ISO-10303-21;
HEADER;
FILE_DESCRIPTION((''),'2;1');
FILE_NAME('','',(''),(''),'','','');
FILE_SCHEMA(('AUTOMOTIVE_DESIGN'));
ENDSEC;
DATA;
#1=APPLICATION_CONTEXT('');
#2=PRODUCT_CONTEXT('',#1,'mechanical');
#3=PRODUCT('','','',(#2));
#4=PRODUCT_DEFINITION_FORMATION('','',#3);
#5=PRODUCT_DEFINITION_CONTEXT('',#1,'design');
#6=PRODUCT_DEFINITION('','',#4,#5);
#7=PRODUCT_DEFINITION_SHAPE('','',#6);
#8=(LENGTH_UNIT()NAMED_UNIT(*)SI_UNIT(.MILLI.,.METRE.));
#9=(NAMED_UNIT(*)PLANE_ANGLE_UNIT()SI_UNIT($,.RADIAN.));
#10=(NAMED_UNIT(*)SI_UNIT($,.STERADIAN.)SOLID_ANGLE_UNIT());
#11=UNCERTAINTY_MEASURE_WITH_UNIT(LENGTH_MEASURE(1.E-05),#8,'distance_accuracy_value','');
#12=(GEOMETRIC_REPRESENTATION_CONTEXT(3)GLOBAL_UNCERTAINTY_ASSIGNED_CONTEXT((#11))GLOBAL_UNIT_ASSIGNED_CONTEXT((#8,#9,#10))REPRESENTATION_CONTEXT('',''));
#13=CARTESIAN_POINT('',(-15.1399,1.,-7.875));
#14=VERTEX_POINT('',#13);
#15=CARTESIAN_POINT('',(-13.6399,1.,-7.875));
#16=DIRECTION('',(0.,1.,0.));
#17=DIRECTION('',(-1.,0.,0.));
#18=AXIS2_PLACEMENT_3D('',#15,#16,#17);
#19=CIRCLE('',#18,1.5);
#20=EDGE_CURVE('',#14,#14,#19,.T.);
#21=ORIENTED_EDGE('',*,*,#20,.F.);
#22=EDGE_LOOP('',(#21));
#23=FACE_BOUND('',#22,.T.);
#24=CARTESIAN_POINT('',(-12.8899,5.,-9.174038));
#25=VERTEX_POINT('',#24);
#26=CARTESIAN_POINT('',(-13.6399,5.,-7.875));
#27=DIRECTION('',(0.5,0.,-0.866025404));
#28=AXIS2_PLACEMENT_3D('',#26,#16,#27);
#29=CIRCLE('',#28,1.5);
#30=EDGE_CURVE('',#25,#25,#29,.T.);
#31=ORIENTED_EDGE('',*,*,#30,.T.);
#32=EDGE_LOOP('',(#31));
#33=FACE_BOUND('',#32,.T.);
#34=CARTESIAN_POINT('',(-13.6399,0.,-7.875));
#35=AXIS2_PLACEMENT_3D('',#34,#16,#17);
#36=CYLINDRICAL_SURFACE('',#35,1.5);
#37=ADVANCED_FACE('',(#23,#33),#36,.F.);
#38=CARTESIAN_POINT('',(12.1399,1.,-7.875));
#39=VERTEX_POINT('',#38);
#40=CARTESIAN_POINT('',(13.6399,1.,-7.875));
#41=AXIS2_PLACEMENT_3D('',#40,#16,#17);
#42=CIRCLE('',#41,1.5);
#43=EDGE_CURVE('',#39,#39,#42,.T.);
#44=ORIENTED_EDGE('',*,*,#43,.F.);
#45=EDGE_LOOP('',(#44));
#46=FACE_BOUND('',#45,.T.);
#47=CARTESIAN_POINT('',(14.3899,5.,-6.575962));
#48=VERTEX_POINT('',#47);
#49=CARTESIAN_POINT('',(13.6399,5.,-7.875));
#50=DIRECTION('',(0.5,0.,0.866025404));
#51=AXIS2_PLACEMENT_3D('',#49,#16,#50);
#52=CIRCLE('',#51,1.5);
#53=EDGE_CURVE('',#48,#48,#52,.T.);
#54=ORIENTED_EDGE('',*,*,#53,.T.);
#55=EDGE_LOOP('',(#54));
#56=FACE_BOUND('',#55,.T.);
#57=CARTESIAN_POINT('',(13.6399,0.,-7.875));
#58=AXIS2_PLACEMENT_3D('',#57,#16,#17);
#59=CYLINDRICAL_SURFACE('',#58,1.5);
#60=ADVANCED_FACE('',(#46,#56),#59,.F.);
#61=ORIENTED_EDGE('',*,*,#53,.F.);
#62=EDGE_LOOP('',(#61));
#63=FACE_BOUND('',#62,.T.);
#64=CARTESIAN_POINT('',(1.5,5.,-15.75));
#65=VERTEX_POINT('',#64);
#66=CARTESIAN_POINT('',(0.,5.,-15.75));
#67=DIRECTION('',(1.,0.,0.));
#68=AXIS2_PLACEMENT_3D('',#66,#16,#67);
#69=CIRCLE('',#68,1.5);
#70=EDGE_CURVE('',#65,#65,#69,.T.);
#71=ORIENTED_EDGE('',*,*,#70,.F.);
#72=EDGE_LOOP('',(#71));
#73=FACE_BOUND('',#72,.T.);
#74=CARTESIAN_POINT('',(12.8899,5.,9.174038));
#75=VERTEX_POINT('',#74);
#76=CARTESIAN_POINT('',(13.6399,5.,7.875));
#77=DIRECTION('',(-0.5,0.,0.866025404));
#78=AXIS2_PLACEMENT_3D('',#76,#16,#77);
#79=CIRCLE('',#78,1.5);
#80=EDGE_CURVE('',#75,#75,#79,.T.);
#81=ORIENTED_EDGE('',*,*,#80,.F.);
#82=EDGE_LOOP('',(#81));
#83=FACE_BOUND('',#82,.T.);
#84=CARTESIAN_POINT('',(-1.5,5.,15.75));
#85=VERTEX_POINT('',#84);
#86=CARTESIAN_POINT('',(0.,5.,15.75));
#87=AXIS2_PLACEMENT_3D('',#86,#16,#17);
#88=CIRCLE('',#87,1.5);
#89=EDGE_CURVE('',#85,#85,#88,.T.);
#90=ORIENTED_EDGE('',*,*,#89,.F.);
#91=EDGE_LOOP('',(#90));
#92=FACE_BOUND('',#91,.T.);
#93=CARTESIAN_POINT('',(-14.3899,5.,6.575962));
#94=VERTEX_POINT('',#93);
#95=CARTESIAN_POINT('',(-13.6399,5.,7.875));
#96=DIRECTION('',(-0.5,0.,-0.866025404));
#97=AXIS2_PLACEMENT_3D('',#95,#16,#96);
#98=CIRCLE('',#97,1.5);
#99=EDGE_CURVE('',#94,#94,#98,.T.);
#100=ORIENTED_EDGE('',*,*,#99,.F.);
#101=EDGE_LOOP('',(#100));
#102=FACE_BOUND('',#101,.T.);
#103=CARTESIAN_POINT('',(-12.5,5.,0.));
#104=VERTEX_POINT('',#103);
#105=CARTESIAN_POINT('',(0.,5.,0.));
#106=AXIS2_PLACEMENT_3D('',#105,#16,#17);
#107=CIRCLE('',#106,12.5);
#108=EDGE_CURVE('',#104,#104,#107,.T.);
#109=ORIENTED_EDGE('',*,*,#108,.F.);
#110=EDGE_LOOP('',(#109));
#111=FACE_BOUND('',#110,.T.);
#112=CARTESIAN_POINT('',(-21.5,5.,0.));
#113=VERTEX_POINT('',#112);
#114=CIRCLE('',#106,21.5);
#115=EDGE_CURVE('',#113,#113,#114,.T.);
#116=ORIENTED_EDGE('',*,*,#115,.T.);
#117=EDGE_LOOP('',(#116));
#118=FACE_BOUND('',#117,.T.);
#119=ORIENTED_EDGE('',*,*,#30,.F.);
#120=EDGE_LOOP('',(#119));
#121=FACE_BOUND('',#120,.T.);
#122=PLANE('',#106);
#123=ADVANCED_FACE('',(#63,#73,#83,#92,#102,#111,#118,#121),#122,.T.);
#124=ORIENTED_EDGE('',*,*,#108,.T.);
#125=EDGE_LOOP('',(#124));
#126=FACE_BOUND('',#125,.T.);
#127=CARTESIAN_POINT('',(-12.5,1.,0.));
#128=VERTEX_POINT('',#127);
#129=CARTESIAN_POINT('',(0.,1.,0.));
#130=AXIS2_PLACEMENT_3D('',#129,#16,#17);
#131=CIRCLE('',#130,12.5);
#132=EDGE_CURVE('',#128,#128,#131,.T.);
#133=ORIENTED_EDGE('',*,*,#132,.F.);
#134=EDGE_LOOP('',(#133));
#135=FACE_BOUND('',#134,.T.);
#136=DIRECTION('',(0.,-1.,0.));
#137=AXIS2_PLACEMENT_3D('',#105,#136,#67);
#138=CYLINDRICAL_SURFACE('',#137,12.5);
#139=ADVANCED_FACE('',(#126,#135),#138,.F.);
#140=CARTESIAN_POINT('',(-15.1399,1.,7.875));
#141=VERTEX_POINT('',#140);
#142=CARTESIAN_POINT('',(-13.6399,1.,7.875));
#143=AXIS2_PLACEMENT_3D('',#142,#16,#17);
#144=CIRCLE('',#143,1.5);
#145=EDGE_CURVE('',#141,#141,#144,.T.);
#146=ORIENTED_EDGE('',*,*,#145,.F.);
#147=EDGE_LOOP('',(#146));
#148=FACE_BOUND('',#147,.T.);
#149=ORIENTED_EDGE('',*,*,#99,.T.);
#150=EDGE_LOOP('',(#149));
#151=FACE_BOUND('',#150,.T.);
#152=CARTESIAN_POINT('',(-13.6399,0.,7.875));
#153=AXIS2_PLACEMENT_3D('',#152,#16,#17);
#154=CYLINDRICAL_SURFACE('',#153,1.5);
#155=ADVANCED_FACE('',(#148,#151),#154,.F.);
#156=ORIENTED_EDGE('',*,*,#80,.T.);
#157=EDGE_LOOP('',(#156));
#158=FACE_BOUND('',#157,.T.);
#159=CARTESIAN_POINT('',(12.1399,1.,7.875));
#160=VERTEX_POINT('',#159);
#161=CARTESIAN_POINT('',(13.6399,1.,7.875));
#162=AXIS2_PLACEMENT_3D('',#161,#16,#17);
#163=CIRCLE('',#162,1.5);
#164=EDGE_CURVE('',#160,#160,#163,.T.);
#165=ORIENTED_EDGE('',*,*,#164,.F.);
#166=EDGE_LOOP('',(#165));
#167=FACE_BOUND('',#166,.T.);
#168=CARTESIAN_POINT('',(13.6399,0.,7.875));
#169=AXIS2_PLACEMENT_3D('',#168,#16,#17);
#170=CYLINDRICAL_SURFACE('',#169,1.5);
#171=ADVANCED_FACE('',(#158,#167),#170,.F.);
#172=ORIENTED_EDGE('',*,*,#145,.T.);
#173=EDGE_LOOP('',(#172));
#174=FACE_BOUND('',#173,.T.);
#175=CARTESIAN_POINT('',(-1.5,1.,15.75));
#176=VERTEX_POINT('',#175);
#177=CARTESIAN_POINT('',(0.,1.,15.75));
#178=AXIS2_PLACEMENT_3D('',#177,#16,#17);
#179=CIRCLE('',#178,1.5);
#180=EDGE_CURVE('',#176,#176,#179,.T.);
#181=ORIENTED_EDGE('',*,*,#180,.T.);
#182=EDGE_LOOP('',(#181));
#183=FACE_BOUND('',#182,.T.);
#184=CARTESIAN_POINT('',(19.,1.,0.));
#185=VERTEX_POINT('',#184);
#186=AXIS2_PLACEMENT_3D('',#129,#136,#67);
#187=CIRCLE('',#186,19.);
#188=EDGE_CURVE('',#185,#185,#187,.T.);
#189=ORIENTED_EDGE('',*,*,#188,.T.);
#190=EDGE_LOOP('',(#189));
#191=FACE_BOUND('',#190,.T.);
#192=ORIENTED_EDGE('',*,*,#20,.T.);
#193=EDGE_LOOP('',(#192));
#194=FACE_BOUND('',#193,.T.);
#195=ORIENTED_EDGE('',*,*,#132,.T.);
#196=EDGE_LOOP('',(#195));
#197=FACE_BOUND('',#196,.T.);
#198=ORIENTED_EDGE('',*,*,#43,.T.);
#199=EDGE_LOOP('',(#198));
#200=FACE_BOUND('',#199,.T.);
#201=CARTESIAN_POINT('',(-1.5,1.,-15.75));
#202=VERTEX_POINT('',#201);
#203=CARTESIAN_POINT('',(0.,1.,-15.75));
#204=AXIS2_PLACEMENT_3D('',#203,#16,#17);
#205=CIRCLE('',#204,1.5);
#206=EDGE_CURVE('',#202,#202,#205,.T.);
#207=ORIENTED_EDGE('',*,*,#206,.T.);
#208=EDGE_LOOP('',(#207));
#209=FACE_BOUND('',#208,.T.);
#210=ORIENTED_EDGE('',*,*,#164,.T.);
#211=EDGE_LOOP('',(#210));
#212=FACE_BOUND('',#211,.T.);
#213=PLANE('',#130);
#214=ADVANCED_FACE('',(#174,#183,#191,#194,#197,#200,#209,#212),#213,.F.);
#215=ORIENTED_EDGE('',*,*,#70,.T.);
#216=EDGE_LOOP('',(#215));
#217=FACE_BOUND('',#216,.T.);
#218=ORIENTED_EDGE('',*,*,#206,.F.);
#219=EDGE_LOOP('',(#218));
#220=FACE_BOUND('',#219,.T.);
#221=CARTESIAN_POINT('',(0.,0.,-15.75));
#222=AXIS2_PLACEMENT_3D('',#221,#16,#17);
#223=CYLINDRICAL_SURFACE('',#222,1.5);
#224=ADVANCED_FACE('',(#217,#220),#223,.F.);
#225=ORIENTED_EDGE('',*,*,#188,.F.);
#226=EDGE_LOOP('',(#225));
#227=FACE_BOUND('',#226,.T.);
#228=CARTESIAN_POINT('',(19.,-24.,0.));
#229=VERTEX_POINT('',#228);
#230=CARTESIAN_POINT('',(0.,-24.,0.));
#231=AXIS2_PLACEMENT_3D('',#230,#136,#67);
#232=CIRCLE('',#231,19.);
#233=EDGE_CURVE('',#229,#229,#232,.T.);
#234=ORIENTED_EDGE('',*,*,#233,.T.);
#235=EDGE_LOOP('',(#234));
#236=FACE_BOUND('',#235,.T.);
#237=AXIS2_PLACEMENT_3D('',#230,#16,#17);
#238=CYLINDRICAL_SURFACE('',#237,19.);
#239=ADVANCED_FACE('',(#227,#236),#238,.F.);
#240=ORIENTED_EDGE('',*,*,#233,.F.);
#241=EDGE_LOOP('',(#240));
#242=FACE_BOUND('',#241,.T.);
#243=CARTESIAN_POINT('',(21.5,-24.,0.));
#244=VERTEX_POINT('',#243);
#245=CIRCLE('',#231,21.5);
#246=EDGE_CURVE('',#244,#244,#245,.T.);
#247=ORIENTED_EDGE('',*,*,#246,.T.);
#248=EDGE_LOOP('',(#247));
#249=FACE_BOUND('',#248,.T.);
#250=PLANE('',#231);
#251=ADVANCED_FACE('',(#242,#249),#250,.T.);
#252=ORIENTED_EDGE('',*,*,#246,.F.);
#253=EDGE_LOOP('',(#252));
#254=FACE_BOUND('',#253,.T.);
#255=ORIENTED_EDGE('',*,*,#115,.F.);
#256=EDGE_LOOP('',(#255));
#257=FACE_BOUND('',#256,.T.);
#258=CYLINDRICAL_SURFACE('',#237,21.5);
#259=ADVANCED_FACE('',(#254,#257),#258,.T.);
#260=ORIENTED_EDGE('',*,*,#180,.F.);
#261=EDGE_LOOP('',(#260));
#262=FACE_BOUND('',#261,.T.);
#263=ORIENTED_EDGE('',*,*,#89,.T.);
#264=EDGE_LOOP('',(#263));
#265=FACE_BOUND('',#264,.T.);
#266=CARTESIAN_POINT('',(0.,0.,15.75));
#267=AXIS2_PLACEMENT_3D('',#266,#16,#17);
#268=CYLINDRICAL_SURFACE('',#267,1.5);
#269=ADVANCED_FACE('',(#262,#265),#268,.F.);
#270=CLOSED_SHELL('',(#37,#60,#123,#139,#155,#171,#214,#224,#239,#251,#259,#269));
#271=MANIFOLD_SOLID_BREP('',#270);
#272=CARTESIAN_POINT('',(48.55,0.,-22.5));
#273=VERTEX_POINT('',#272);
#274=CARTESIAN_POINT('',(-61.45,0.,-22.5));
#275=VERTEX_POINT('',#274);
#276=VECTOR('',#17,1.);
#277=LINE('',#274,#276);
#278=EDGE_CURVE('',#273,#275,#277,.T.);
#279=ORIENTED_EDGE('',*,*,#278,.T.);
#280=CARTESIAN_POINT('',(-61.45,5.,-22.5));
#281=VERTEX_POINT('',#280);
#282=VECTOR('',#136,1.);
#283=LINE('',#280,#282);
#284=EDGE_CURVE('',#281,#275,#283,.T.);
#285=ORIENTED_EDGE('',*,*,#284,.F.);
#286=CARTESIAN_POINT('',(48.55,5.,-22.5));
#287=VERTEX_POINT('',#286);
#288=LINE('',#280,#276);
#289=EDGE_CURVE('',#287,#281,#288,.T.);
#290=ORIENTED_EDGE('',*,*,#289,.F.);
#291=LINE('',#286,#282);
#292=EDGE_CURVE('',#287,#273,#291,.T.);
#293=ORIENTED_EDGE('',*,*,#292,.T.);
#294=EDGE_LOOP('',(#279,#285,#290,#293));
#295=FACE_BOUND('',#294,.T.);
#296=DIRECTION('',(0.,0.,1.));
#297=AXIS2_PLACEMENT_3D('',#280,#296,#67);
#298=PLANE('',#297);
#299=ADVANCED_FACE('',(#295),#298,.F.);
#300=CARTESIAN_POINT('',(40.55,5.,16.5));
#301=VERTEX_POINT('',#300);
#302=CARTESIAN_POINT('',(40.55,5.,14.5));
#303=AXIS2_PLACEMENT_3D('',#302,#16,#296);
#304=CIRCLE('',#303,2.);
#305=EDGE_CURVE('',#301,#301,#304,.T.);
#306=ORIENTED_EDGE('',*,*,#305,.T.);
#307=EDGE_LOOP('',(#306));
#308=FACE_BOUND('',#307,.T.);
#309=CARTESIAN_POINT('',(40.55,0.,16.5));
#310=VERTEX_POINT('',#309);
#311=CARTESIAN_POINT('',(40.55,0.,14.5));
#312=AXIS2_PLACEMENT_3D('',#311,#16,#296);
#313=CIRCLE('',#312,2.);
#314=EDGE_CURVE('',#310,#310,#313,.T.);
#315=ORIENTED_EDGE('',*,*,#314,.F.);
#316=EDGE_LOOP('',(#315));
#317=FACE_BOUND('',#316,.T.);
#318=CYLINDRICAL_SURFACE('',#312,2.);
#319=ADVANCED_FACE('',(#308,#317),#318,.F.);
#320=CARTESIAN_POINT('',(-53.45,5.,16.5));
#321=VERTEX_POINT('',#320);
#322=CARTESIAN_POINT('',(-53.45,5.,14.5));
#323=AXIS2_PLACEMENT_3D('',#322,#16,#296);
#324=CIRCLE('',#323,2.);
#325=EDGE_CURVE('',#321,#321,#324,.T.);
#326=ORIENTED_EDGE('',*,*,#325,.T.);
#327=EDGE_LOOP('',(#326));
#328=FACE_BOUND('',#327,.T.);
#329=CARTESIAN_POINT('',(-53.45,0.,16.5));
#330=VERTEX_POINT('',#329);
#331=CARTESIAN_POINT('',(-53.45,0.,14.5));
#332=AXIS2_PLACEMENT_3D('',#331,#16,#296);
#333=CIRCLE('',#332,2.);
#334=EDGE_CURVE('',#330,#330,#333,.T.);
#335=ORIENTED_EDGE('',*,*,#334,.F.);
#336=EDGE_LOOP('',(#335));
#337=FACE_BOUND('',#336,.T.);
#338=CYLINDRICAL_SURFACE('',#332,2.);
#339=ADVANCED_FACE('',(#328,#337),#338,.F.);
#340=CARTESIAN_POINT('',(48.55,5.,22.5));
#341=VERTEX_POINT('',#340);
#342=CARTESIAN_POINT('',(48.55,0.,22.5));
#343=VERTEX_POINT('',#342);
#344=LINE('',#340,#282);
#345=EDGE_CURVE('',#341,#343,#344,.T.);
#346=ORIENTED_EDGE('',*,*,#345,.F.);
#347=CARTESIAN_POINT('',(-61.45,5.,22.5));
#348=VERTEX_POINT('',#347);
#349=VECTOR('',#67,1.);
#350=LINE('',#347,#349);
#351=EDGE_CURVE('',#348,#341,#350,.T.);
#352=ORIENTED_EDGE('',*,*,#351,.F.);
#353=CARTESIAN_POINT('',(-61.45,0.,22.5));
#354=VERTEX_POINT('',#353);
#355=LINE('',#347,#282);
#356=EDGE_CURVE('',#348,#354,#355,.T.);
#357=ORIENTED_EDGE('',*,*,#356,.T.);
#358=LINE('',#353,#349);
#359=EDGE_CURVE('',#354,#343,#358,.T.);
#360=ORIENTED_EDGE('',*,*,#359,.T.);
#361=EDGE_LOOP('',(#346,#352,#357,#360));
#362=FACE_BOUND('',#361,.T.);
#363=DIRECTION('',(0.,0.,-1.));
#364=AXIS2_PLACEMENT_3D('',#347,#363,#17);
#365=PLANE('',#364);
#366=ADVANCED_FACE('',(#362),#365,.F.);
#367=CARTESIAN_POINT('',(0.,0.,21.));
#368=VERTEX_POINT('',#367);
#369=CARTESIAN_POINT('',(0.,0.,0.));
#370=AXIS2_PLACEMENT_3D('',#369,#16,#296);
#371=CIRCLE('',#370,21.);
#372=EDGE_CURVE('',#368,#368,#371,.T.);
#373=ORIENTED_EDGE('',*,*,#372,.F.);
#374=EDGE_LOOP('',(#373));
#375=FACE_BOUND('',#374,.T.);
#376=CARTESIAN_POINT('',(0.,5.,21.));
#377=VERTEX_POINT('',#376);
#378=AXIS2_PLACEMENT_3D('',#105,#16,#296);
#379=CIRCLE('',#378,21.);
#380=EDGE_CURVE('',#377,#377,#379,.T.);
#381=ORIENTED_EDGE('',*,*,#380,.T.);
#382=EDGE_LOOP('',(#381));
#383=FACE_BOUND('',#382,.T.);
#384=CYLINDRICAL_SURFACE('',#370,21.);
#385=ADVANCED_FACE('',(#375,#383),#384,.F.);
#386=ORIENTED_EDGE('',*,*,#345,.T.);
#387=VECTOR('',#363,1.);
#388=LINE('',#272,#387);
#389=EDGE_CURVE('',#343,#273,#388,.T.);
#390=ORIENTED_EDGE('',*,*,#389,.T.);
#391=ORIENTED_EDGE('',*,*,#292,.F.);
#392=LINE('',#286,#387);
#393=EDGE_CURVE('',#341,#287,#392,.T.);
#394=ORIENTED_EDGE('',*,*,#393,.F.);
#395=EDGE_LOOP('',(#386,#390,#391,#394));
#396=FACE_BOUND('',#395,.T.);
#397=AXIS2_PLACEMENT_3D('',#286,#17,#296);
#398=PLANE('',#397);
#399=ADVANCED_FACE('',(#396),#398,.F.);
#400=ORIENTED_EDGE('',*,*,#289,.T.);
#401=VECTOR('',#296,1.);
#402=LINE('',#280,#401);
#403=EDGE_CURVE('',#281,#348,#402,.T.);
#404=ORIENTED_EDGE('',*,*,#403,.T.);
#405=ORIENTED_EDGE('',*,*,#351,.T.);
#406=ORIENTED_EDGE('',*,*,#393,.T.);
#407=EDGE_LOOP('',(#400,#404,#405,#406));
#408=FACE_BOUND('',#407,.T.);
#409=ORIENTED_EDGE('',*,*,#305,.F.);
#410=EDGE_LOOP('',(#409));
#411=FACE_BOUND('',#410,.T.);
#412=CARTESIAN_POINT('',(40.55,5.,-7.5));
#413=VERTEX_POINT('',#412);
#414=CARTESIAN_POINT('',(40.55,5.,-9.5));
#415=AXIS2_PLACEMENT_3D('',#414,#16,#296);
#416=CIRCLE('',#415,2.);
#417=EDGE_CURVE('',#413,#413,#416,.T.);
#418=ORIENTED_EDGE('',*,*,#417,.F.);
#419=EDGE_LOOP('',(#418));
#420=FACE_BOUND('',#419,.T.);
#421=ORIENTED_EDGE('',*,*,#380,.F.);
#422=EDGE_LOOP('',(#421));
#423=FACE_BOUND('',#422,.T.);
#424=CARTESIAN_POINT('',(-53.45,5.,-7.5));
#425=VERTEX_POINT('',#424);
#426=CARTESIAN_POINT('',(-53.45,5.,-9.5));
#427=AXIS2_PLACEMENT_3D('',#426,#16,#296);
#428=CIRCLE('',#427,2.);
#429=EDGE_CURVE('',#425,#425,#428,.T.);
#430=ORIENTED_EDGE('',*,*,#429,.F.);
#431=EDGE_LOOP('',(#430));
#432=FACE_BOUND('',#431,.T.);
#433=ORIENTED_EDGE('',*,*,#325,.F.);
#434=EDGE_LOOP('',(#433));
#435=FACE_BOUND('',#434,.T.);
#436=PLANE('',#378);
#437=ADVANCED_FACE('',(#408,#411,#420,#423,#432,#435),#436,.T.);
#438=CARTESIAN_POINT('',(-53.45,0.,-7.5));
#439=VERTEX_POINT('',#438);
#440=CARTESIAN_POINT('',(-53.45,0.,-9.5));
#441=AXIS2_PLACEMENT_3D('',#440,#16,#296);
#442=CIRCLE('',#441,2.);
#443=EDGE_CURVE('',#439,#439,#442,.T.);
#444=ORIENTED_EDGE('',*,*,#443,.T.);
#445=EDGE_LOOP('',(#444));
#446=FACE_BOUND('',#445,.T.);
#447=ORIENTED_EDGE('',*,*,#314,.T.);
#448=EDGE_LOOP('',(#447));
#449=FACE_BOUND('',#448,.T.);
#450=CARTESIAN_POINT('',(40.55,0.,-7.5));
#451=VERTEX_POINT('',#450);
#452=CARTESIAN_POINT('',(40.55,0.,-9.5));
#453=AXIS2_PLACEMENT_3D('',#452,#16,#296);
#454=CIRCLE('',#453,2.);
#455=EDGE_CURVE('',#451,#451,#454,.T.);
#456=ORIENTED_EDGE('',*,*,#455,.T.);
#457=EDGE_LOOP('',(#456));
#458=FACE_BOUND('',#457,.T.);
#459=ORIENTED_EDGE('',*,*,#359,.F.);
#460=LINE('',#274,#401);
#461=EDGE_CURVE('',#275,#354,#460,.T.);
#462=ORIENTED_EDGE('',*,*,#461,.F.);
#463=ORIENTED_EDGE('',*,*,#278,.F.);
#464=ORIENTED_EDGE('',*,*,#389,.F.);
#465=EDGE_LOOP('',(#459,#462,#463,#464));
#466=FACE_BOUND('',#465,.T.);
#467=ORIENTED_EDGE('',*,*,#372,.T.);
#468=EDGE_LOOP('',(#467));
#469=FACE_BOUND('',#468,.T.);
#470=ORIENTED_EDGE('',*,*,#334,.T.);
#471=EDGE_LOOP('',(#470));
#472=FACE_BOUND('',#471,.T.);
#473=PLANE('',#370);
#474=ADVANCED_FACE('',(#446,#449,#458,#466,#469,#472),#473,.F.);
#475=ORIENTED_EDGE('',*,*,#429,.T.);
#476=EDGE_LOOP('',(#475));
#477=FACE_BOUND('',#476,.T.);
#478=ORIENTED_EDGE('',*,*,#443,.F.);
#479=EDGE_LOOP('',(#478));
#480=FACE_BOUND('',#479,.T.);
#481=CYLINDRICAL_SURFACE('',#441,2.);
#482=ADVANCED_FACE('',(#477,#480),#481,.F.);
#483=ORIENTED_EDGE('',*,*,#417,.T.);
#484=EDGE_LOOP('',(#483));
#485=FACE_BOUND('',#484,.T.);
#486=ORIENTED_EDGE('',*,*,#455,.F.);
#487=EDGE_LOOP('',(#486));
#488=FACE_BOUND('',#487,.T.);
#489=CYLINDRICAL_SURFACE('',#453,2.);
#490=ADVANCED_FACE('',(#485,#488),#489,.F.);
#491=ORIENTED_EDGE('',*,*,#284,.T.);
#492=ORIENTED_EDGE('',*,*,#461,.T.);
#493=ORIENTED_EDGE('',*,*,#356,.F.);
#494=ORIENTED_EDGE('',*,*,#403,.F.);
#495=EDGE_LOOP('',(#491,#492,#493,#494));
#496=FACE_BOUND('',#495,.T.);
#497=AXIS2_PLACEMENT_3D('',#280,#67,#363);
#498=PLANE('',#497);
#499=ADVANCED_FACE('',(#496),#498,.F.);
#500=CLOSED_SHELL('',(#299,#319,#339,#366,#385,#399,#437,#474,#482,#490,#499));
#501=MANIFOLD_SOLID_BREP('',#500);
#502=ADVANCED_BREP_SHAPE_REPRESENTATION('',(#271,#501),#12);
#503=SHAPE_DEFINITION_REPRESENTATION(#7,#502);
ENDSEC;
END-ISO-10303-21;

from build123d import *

# Parameters (mm, degrees)
SKETCH1_W                 = 110
SKETCH1_H                 = 45
BOSS_EXTRUDE1_DEPTH       = 5
SKETCH2_R                 = 21
CUT_EXTRUDE1_DEPTH        = 5
MOTOR_MOUNT_START         = -24
MOTOR_MOUNT_OUTLINE_R     = 21.5
MOTOR_MOUNT_OUTLINE_R_2   = 19
MOTOR_MOUNT_DEPTH         = 29
MOTOR_MOUNT_START_2       = 1
MOTOR_MOUNT_2_OUTLINE_R   = 19
MOTOR_MOUNT_2_OUTLINE_R_2 = 1.5
MOTOR_MOUNT_2_OUTLINE_R_3 = 12.5
MOTOR_MOUNT_2_DEPTH       = 4
SKETCH6_R                 = 2
CUT_EXTRUDE2_DEPTH        = 5
SKETCH7_R                 = 2
CUT_EXTRUDE3_DEPTH        = 5


# Read off the part's stored shape, not the designer's step: motor_mount
with BuildPart() as part:
    # Sketch1 → Boss-Extrude1 (new body)
    with BuildSketch(Plane(origin=(0, 0, 0), x_dir=(1, 0, 0), z_dir=(0, 1, 0))):
        with Locations((-6.45, 0)):
            Rectangle(SKETCH1_W, SKETCH1_H)
    extrude(amount=BOSS_EXTRUDE1_DEPTH)

    # Sketch2 → Cut-Extrude1 (cut)
    with BuildSketch(Plane(origin=(0, 5, 0), x_dir=(1, 0, 0), z_dir=(0, 1, 0))):
        with Locations(Location((0, 0, 0), (0, 0, 270))):
            Circle(SKETCH2_R)
    extrude(amount=-CUT_EXTRUDE1_DEPTH, mode=Mode.SUBTRACT)

    # Sketch6 → Cut-Extrude2 (cut)
    with BuildSketch(Plane(origin=(0, 5, 0), x_dir=(1, 0, 0), z_dir=(0, 1, 0))):
        with Locations(Location((40.55, -14.5, 0), (0, 0, 270))):
            Circle(SKETCH6_R)
        with Locations(Location((40.55, 9.5, 0), (0, 0, 270))):
            Circle(SKETCH6_R)
    extrude(amount=-CUT_EXTRUDE2_DEPTH, mode=Mode.SUBTRACT)

    # Sketch7 → Cut-Extrude3 (cut)
    with BuildSketch(Plane(origin=(0, 5, 0), x_dir=(1, 0, 0), z_dir=(0, 1, 0))):
        with Locations(Location((-53.45, -14.5, 0), (0, 0, 270))):
            Circle(SKETCH7_R)
        with Locations(Location((-53.45, 9.5, 0), (0, 0, 270))):
            Circle(SKETCH7_R)
    extrude(amount=-CUT_EXTRUDE3_DEPTH, mode=Mode.SUBTRACT)


with BuildPart() as body_2:
    # motor_mount outline → motor_mount (new body)
    with BuildSketch(Plane(origin=(0, 0, 0), x_dir=(1, 0, 0), z_dir=(0, 1, 0)).offset(MOTOR_MOUNT_START)):
        Circle(MOTOR_MOUNT_OUTLINE_R)
        Circle(MOTOR_MOUNT_OUTLINE_R_2, mode=Mode.SUBTRACT)
    extrude(amount=MOTOR_MOUNT_DEPTH)

    # motor_mount 2 outline → motor_mount 2 (add)
    with BuildSketch(Plane(origin=(0, 0, 0), x_dir=(1, 0, 0), z_dir=(0, 1, 0)).offset(MOTOR_MOUNT_START_2)):
        Circle(MOTOR_MOUNT_2_OUTLINE_R)
        with Locations((-13.63990011, -7.875)):
            Circle(MOTOR_MOUNT_2_OUTLINE_R_2, mode=Mode.SUBTRACT)
        with Locations((0, -15.75)):
            Circle(MOTOR_MOUNT_2_OUTLINE_R_2, mode=Mode.SUBTRACT)
        with Locations((13.63990011, -7.875)):
            Circle(MOTOR_MOUNT_2_OUTLINE_R_2, mode=Mode.SUBTRACT)
        with Locations((-13.63990011, 7.875)):
            Circle(MOTOR_MOUNT_2_OUTLINE_R_2, mode=Mode.SUBTRACT)
        Circle(MOTOR_MOUNT_2_OUTLINE_R_3, mode=Mode.SUBTRACT)
        with Locations((13.63990011, 7.875)):
            Circle(MOTOR_MOUNT_2_OUTLINE_R_2, mode=Mode.SUBTRACT)
        with Locations((0, 15.75)):
            Circle(MOTOR_MOUNT_2_OUTLINE_R_2, mode=Mode.SUBTRACT)
    extrude(amount=MOTOR_MOUNT_2_DEPTH)


solid = Compound([part.part, body_2.part])
